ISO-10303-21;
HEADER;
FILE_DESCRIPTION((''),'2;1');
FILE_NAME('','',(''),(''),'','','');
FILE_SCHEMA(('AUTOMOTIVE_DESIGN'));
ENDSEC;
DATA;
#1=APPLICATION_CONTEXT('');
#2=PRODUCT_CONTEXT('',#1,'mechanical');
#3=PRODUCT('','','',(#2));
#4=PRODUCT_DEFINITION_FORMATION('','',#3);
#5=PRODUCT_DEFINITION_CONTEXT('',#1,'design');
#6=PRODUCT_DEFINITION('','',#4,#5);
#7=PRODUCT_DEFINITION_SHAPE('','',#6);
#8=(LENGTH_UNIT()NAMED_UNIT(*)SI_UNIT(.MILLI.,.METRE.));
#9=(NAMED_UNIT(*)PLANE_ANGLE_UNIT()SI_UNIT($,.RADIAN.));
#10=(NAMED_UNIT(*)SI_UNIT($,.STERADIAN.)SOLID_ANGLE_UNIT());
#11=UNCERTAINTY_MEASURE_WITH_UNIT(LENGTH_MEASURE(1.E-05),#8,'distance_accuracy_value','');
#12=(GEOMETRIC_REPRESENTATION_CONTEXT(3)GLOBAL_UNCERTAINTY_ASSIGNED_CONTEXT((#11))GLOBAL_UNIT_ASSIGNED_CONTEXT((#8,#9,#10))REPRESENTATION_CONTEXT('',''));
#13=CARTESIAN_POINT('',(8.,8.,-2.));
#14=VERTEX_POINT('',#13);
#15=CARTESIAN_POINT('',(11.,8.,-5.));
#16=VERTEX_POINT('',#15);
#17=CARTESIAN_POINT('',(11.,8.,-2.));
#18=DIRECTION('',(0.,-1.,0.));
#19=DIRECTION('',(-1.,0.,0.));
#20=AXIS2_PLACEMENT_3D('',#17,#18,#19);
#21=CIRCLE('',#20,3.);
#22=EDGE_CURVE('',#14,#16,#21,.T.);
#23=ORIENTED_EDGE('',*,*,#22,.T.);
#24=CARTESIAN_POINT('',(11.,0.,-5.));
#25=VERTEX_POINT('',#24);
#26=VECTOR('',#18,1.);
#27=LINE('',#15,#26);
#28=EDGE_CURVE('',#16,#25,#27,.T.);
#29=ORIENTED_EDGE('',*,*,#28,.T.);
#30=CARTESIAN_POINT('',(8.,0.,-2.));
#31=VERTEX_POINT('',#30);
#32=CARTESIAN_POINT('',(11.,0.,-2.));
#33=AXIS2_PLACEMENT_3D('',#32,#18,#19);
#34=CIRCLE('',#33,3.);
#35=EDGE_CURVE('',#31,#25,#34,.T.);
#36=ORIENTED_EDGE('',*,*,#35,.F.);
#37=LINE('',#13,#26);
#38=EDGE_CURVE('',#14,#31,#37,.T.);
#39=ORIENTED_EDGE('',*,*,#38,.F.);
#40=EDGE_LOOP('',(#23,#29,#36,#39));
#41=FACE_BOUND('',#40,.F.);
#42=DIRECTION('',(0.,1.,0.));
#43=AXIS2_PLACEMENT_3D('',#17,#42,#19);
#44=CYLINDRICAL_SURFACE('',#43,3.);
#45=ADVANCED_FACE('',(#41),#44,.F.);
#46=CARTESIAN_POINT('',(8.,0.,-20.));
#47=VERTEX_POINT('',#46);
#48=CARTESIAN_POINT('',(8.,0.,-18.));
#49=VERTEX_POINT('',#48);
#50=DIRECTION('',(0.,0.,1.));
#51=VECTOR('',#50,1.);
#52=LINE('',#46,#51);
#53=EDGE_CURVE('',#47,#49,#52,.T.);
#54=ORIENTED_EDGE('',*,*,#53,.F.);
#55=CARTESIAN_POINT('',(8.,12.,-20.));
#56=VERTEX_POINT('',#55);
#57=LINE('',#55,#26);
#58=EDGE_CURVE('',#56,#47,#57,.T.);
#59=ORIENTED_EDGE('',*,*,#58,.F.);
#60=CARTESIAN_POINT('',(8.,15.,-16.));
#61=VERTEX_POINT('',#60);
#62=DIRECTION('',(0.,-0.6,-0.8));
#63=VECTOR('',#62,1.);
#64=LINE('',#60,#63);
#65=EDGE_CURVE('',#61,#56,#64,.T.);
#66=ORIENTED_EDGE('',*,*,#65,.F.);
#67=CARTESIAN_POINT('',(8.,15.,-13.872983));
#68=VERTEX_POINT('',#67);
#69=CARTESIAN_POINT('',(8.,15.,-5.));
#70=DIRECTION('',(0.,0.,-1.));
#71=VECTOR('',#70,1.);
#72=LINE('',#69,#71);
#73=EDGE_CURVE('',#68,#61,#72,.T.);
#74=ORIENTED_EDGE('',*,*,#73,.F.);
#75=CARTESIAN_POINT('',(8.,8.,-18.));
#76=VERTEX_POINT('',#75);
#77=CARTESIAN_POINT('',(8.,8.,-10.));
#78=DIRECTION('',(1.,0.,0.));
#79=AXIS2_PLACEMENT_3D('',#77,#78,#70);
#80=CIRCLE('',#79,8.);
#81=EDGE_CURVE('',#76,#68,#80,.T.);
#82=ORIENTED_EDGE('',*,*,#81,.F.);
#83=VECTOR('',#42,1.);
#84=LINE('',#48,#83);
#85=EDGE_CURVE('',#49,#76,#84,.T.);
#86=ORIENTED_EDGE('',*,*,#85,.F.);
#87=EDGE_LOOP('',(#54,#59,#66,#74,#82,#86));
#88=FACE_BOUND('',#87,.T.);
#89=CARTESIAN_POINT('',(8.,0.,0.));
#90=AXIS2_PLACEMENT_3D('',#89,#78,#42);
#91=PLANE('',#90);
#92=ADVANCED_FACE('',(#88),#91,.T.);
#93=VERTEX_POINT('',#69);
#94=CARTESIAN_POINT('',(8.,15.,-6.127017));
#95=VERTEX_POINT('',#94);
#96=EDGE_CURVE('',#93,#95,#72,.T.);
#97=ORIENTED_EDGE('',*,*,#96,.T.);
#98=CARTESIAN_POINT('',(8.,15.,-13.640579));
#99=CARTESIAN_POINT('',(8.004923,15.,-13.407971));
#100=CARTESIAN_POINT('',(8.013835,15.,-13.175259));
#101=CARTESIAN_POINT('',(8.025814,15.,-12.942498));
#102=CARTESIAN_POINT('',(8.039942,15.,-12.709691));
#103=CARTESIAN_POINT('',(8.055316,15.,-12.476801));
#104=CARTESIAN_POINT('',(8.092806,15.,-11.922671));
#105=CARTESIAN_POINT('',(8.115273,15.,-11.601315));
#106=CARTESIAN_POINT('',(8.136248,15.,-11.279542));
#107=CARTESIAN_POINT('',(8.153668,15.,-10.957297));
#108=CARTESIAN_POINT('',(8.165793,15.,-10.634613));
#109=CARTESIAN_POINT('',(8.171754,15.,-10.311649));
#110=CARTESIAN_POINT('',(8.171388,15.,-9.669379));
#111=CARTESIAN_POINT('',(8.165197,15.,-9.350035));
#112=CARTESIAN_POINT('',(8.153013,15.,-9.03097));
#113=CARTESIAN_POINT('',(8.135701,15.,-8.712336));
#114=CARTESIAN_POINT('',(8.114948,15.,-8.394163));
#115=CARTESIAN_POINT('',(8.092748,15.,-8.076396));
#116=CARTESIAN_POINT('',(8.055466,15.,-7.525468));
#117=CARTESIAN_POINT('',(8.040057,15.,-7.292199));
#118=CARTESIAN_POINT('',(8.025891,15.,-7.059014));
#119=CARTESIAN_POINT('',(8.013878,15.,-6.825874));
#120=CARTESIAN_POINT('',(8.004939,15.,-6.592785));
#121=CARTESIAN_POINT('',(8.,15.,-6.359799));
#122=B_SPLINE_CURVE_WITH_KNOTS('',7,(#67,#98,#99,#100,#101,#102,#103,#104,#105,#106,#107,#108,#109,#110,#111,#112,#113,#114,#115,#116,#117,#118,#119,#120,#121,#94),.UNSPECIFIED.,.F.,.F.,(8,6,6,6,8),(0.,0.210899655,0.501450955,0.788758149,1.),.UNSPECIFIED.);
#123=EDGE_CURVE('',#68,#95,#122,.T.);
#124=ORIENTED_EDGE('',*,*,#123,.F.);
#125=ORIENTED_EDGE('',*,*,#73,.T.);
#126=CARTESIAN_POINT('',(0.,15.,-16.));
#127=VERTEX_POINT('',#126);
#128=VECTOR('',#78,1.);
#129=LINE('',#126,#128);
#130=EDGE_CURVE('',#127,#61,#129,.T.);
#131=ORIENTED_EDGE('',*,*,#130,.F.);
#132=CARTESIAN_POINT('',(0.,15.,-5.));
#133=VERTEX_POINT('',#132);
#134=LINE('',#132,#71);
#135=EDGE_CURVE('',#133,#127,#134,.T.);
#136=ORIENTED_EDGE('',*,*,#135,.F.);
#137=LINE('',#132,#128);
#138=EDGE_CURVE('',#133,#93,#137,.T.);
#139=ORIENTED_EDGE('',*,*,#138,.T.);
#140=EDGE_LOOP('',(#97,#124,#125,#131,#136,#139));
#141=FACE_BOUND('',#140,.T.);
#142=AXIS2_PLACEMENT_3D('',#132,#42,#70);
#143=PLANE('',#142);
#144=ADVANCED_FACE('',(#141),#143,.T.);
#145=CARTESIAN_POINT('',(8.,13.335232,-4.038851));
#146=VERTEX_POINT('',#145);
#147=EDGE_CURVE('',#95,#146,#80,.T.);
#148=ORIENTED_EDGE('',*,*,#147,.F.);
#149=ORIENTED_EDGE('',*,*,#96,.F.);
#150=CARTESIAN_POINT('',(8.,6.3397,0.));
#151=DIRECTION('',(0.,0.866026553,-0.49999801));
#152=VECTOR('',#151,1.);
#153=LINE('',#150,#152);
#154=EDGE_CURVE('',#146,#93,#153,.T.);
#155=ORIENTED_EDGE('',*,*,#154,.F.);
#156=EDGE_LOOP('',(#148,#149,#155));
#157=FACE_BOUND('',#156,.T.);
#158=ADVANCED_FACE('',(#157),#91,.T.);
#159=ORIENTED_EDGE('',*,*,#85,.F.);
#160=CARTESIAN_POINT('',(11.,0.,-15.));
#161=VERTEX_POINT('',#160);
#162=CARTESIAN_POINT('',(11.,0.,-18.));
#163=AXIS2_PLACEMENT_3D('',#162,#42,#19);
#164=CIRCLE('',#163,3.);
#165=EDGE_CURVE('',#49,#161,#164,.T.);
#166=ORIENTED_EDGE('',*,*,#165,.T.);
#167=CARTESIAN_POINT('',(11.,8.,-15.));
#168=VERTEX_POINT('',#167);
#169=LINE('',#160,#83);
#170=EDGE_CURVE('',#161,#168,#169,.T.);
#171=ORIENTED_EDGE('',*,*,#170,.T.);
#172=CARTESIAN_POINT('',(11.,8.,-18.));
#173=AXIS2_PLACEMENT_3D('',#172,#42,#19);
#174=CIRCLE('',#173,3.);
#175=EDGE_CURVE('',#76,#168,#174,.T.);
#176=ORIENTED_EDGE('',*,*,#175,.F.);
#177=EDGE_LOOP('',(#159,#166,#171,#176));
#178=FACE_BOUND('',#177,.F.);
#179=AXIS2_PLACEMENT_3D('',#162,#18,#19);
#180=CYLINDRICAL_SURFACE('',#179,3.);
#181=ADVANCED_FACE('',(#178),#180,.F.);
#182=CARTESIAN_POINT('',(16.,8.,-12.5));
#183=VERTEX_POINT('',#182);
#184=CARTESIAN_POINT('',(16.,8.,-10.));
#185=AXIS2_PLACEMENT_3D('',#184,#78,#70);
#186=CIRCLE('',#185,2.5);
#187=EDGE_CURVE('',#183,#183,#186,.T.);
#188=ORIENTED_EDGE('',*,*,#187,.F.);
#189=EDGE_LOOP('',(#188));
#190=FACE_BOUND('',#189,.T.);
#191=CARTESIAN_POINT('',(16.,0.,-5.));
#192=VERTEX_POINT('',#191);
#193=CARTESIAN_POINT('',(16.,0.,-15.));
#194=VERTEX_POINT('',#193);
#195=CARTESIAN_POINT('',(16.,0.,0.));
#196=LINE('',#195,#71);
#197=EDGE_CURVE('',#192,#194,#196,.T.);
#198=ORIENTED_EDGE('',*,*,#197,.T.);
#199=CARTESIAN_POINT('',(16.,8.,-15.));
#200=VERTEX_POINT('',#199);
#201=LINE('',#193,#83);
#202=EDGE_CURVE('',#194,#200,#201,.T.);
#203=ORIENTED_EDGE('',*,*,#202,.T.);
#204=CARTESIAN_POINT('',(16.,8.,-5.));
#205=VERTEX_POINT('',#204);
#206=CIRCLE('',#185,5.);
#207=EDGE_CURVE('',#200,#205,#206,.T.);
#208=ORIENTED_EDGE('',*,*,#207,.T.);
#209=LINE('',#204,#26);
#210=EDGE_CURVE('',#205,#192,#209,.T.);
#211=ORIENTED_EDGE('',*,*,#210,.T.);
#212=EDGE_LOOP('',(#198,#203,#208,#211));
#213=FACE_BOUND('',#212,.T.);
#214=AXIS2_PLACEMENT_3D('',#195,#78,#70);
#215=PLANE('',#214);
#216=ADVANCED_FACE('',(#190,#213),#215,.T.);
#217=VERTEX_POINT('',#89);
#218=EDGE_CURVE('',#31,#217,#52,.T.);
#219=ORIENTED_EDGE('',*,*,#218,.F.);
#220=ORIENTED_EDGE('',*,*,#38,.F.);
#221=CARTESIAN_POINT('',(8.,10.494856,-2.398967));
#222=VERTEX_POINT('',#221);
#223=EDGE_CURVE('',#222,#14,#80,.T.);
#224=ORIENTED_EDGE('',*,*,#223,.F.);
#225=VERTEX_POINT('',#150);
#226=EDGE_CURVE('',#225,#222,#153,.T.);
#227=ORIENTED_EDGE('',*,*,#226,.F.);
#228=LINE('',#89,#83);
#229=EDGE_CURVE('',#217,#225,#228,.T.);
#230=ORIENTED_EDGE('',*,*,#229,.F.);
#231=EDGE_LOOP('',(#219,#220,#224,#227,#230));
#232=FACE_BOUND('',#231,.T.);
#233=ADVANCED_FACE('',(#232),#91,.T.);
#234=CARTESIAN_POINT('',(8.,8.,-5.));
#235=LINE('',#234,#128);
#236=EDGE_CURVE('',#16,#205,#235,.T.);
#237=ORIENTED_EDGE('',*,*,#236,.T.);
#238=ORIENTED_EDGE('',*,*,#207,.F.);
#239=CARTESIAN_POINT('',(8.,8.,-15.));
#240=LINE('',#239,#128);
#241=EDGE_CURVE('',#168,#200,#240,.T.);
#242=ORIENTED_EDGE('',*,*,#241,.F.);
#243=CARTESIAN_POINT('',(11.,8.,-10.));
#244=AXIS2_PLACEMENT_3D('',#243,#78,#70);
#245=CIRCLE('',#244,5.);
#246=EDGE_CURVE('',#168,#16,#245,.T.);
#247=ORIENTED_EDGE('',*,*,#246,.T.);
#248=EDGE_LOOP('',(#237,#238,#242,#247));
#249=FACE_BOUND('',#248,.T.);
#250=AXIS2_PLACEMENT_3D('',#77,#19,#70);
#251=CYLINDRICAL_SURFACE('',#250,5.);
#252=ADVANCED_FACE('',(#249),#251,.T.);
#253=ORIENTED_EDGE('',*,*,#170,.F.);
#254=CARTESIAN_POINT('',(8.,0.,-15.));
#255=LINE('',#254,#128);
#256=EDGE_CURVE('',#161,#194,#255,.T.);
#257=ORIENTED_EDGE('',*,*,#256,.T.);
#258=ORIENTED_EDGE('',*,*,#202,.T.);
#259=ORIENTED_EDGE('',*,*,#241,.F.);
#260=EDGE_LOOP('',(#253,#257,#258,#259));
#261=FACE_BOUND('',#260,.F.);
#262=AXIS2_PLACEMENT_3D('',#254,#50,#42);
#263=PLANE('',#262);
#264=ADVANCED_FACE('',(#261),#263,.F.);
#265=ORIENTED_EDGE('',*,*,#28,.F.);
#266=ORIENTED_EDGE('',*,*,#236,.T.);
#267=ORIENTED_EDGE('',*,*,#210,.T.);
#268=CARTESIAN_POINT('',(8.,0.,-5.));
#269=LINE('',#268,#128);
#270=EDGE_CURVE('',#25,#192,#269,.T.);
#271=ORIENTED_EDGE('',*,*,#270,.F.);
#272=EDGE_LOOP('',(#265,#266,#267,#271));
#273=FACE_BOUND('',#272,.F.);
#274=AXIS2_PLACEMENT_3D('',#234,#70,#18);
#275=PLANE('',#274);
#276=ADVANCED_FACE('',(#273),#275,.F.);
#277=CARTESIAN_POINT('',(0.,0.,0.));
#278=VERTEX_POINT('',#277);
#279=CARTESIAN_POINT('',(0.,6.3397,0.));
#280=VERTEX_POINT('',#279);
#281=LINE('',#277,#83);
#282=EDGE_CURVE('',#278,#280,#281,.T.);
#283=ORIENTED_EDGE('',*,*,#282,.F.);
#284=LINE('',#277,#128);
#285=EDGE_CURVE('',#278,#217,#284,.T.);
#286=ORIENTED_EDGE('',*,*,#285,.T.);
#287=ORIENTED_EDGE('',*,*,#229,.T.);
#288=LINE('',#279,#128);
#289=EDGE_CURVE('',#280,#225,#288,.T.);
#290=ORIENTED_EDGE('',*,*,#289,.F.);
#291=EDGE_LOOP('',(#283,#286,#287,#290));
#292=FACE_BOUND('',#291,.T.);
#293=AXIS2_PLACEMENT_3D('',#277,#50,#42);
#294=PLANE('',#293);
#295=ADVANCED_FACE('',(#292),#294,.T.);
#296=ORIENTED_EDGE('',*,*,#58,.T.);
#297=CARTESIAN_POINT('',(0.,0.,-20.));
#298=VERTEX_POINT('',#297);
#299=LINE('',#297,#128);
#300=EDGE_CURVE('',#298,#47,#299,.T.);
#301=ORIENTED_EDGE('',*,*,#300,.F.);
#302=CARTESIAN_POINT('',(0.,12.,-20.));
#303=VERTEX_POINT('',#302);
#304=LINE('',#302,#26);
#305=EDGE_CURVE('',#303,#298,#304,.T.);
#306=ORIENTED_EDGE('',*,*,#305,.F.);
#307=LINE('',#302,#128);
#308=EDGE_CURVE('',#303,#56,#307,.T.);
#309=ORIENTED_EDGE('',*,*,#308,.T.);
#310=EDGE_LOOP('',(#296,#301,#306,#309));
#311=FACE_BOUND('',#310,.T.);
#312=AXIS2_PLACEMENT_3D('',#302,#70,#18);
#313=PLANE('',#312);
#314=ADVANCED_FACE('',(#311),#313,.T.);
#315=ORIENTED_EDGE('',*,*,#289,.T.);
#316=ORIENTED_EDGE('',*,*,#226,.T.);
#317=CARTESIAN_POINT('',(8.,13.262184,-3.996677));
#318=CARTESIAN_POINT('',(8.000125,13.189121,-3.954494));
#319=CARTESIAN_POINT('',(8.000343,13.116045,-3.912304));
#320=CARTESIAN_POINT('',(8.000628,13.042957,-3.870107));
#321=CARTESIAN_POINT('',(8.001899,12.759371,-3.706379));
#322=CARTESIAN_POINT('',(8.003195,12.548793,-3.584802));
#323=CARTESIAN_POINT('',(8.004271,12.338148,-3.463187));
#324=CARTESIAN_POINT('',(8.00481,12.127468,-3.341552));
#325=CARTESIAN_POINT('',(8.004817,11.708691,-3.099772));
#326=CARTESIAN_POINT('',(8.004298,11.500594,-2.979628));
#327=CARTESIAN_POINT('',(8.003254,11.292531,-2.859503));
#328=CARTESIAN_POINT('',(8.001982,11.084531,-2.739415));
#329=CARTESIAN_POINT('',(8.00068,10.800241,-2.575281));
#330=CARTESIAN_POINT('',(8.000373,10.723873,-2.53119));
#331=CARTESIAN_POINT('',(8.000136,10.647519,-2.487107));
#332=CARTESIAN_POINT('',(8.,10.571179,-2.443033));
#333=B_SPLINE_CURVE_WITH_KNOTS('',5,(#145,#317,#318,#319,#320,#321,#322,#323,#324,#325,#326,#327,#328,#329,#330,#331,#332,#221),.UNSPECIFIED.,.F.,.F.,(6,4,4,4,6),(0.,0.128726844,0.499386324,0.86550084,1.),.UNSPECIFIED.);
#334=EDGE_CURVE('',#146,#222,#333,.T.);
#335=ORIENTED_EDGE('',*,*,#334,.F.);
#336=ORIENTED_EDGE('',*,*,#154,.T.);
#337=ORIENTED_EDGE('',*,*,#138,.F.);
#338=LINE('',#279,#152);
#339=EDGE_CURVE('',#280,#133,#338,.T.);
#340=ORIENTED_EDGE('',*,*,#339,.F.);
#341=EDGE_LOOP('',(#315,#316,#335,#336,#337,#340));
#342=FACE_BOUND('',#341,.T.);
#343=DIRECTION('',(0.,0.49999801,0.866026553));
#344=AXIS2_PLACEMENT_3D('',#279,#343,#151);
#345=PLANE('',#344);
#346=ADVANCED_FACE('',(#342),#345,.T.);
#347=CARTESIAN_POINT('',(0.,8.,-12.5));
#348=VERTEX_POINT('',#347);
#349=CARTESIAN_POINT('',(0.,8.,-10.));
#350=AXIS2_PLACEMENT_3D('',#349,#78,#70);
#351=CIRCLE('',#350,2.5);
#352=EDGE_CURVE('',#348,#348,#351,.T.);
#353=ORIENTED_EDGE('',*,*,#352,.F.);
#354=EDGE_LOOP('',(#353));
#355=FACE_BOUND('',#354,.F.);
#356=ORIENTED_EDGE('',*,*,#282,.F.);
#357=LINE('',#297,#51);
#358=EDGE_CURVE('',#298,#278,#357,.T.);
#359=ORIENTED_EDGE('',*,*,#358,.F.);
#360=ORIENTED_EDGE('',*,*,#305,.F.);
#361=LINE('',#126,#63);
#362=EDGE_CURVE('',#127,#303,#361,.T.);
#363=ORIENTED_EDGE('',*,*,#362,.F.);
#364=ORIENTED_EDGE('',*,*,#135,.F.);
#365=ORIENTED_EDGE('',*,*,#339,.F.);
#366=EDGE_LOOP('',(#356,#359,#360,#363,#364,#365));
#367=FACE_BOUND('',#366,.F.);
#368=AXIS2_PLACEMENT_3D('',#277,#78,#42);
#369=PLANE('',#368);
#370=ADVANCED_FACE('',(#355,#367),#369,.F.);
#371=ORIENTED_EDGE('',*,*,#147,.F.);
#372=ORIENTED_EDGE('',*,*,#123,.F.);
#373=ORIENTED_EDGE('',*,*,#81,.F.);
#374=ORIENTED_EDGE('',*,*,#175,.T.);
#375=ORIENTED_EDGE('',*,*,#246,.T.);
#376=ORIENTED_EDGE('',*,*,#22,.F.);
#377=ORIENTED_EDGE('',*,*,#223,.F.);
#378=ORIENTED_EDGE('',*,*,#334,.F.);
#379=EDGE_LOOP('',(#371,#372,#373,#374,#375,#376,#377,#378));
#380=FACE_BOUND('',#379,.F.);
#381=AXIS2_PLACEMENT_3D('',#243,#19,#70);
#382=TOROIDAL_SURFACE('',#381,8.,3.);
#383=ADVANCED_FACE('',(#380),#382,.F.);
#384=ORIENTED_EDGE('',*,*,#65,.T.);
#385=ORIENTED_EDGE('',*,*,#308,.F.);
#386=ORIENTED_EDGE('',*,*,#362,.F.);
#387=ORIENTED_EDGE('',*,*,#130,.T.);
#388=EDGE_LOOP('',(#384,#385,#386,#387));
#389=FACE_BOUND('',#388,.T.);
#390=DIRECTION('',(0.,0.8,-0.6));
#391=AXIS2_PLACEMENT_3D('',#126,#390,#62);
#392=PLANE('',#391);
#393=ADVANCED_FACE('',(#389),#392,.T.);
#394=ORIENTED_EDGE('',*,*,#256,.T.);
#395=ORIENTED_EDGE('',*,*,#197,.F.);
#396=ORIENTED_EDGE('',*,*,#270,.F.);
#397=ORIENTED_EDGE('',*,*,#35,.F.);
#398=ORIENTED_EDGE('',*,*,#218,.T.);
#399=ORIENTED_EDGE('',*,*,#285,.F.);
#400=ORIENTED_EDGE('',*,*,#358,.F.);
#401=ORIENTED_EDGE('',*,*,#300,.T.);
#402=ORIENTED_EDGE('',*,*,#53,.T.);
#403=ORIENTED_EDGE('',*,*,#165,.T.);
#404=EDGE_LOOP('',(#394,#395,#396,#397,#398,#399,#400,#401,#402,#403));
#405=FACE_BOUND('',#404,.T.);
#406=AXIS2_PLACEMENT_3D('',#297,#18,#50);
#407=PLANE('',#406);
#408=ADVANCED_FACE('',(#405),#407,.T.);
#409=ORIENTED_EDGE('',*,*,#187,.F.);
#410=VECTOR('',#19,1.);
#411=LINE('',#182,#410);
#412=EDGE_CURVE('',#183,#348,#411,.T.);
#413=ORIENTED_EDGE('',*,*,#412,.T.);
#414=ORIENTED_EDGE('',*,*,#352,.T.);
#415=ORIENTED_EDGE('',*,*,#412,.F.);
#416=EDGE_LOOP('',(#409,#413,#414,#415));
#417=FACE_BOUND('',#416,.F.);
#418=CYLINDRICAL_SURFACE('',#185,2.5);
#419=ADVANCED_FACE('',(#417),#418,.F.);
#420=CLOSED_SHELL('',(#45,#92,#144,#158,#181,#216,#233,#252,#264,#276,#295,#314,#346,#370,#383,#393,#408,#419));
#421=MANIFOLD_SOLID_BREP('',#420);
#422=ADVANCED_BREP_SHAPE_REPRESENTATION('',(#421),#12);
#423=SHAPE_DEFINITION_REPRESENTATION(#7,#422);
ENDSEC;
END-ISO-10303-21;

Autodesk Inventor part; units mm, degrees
ref_plane "YZ Plane" through (0, 0, 0) normal (1, 0, 0) x (0, 1, 0)
ref_plane "XZ Plane" through (0, 0, 0) normal (0, 1, 0) x (-1, 0, 0)
ref_plane "XY Plane" through (0, 0, 0) normal (0, 0, 1) x (1, 0, 0)
sketch "草圖1" plane through (0, 0, 0) normal (1, 0, 0) x (0, 1, 0)
  line L0 (0, 0) -> (6.3397, 0)
  line L1 (6.3397, 0) -> (15, -5)
  line L2 (15, -5) -> (15, -16)
  line L3 (15, -16) -> (12, -20)
  line L4 (12, -20) -> (0, -20)
  line L5 (0, -20) -> (0, 0)
  dimension "d0" = 15
  dimension "d1" = 20
  dimension "d2" = 60
  dimension "d3" = 5
  dimension "d4" = 4
  dimension "d5" = 3
extrude "擠出1" add sketch "草圖1" along normal blind 8
sketch "草圖2" plane through (8, 0, 0) normal (1, 0, 0) x (0, 0, -1)
  line L0 (0, 0) -> (20, 0) projected
  line L1 (15, 0) -> (15, 8)
  arc A0 (15, 8) -> (5, 8) centre (10, 8) ccw
  line L2 (5, 8) -> (5, 0)
  line L3 (5, 8) -> (16.8472, 8) construction
  line L4 (10, 8) -> (10, 12.4145) construction
  line L5 (0, 6.3397) -> (0, 0) projected
  line L6 (5, 0) -> (15, 0)
  dimension "d8" = 10
  dimension "d9" = 5
  dimension "d10" = 8
extrude "擠出2" add sketch "草圖2" along normal blind 8
fillet "圓角1" radius 3 3 edges at (8, 13, -10) (8, 4, -15) (8, 4, -5)
sketch "草圖3" plane through (16, 0, 0) normal (1, 0, 0) x (0, 0, -1)
  arc A0 (15, 8) -> (5, 8) centre (10, 8) ccw projected
  circle A1 centre (10, 8) radius 2.5
  point P0 (0, 0)
  dimension "d14" = 5
extrude "擠出3" cut sketch "草圖3" against normal up to next
properties part number "410571040示範二"
